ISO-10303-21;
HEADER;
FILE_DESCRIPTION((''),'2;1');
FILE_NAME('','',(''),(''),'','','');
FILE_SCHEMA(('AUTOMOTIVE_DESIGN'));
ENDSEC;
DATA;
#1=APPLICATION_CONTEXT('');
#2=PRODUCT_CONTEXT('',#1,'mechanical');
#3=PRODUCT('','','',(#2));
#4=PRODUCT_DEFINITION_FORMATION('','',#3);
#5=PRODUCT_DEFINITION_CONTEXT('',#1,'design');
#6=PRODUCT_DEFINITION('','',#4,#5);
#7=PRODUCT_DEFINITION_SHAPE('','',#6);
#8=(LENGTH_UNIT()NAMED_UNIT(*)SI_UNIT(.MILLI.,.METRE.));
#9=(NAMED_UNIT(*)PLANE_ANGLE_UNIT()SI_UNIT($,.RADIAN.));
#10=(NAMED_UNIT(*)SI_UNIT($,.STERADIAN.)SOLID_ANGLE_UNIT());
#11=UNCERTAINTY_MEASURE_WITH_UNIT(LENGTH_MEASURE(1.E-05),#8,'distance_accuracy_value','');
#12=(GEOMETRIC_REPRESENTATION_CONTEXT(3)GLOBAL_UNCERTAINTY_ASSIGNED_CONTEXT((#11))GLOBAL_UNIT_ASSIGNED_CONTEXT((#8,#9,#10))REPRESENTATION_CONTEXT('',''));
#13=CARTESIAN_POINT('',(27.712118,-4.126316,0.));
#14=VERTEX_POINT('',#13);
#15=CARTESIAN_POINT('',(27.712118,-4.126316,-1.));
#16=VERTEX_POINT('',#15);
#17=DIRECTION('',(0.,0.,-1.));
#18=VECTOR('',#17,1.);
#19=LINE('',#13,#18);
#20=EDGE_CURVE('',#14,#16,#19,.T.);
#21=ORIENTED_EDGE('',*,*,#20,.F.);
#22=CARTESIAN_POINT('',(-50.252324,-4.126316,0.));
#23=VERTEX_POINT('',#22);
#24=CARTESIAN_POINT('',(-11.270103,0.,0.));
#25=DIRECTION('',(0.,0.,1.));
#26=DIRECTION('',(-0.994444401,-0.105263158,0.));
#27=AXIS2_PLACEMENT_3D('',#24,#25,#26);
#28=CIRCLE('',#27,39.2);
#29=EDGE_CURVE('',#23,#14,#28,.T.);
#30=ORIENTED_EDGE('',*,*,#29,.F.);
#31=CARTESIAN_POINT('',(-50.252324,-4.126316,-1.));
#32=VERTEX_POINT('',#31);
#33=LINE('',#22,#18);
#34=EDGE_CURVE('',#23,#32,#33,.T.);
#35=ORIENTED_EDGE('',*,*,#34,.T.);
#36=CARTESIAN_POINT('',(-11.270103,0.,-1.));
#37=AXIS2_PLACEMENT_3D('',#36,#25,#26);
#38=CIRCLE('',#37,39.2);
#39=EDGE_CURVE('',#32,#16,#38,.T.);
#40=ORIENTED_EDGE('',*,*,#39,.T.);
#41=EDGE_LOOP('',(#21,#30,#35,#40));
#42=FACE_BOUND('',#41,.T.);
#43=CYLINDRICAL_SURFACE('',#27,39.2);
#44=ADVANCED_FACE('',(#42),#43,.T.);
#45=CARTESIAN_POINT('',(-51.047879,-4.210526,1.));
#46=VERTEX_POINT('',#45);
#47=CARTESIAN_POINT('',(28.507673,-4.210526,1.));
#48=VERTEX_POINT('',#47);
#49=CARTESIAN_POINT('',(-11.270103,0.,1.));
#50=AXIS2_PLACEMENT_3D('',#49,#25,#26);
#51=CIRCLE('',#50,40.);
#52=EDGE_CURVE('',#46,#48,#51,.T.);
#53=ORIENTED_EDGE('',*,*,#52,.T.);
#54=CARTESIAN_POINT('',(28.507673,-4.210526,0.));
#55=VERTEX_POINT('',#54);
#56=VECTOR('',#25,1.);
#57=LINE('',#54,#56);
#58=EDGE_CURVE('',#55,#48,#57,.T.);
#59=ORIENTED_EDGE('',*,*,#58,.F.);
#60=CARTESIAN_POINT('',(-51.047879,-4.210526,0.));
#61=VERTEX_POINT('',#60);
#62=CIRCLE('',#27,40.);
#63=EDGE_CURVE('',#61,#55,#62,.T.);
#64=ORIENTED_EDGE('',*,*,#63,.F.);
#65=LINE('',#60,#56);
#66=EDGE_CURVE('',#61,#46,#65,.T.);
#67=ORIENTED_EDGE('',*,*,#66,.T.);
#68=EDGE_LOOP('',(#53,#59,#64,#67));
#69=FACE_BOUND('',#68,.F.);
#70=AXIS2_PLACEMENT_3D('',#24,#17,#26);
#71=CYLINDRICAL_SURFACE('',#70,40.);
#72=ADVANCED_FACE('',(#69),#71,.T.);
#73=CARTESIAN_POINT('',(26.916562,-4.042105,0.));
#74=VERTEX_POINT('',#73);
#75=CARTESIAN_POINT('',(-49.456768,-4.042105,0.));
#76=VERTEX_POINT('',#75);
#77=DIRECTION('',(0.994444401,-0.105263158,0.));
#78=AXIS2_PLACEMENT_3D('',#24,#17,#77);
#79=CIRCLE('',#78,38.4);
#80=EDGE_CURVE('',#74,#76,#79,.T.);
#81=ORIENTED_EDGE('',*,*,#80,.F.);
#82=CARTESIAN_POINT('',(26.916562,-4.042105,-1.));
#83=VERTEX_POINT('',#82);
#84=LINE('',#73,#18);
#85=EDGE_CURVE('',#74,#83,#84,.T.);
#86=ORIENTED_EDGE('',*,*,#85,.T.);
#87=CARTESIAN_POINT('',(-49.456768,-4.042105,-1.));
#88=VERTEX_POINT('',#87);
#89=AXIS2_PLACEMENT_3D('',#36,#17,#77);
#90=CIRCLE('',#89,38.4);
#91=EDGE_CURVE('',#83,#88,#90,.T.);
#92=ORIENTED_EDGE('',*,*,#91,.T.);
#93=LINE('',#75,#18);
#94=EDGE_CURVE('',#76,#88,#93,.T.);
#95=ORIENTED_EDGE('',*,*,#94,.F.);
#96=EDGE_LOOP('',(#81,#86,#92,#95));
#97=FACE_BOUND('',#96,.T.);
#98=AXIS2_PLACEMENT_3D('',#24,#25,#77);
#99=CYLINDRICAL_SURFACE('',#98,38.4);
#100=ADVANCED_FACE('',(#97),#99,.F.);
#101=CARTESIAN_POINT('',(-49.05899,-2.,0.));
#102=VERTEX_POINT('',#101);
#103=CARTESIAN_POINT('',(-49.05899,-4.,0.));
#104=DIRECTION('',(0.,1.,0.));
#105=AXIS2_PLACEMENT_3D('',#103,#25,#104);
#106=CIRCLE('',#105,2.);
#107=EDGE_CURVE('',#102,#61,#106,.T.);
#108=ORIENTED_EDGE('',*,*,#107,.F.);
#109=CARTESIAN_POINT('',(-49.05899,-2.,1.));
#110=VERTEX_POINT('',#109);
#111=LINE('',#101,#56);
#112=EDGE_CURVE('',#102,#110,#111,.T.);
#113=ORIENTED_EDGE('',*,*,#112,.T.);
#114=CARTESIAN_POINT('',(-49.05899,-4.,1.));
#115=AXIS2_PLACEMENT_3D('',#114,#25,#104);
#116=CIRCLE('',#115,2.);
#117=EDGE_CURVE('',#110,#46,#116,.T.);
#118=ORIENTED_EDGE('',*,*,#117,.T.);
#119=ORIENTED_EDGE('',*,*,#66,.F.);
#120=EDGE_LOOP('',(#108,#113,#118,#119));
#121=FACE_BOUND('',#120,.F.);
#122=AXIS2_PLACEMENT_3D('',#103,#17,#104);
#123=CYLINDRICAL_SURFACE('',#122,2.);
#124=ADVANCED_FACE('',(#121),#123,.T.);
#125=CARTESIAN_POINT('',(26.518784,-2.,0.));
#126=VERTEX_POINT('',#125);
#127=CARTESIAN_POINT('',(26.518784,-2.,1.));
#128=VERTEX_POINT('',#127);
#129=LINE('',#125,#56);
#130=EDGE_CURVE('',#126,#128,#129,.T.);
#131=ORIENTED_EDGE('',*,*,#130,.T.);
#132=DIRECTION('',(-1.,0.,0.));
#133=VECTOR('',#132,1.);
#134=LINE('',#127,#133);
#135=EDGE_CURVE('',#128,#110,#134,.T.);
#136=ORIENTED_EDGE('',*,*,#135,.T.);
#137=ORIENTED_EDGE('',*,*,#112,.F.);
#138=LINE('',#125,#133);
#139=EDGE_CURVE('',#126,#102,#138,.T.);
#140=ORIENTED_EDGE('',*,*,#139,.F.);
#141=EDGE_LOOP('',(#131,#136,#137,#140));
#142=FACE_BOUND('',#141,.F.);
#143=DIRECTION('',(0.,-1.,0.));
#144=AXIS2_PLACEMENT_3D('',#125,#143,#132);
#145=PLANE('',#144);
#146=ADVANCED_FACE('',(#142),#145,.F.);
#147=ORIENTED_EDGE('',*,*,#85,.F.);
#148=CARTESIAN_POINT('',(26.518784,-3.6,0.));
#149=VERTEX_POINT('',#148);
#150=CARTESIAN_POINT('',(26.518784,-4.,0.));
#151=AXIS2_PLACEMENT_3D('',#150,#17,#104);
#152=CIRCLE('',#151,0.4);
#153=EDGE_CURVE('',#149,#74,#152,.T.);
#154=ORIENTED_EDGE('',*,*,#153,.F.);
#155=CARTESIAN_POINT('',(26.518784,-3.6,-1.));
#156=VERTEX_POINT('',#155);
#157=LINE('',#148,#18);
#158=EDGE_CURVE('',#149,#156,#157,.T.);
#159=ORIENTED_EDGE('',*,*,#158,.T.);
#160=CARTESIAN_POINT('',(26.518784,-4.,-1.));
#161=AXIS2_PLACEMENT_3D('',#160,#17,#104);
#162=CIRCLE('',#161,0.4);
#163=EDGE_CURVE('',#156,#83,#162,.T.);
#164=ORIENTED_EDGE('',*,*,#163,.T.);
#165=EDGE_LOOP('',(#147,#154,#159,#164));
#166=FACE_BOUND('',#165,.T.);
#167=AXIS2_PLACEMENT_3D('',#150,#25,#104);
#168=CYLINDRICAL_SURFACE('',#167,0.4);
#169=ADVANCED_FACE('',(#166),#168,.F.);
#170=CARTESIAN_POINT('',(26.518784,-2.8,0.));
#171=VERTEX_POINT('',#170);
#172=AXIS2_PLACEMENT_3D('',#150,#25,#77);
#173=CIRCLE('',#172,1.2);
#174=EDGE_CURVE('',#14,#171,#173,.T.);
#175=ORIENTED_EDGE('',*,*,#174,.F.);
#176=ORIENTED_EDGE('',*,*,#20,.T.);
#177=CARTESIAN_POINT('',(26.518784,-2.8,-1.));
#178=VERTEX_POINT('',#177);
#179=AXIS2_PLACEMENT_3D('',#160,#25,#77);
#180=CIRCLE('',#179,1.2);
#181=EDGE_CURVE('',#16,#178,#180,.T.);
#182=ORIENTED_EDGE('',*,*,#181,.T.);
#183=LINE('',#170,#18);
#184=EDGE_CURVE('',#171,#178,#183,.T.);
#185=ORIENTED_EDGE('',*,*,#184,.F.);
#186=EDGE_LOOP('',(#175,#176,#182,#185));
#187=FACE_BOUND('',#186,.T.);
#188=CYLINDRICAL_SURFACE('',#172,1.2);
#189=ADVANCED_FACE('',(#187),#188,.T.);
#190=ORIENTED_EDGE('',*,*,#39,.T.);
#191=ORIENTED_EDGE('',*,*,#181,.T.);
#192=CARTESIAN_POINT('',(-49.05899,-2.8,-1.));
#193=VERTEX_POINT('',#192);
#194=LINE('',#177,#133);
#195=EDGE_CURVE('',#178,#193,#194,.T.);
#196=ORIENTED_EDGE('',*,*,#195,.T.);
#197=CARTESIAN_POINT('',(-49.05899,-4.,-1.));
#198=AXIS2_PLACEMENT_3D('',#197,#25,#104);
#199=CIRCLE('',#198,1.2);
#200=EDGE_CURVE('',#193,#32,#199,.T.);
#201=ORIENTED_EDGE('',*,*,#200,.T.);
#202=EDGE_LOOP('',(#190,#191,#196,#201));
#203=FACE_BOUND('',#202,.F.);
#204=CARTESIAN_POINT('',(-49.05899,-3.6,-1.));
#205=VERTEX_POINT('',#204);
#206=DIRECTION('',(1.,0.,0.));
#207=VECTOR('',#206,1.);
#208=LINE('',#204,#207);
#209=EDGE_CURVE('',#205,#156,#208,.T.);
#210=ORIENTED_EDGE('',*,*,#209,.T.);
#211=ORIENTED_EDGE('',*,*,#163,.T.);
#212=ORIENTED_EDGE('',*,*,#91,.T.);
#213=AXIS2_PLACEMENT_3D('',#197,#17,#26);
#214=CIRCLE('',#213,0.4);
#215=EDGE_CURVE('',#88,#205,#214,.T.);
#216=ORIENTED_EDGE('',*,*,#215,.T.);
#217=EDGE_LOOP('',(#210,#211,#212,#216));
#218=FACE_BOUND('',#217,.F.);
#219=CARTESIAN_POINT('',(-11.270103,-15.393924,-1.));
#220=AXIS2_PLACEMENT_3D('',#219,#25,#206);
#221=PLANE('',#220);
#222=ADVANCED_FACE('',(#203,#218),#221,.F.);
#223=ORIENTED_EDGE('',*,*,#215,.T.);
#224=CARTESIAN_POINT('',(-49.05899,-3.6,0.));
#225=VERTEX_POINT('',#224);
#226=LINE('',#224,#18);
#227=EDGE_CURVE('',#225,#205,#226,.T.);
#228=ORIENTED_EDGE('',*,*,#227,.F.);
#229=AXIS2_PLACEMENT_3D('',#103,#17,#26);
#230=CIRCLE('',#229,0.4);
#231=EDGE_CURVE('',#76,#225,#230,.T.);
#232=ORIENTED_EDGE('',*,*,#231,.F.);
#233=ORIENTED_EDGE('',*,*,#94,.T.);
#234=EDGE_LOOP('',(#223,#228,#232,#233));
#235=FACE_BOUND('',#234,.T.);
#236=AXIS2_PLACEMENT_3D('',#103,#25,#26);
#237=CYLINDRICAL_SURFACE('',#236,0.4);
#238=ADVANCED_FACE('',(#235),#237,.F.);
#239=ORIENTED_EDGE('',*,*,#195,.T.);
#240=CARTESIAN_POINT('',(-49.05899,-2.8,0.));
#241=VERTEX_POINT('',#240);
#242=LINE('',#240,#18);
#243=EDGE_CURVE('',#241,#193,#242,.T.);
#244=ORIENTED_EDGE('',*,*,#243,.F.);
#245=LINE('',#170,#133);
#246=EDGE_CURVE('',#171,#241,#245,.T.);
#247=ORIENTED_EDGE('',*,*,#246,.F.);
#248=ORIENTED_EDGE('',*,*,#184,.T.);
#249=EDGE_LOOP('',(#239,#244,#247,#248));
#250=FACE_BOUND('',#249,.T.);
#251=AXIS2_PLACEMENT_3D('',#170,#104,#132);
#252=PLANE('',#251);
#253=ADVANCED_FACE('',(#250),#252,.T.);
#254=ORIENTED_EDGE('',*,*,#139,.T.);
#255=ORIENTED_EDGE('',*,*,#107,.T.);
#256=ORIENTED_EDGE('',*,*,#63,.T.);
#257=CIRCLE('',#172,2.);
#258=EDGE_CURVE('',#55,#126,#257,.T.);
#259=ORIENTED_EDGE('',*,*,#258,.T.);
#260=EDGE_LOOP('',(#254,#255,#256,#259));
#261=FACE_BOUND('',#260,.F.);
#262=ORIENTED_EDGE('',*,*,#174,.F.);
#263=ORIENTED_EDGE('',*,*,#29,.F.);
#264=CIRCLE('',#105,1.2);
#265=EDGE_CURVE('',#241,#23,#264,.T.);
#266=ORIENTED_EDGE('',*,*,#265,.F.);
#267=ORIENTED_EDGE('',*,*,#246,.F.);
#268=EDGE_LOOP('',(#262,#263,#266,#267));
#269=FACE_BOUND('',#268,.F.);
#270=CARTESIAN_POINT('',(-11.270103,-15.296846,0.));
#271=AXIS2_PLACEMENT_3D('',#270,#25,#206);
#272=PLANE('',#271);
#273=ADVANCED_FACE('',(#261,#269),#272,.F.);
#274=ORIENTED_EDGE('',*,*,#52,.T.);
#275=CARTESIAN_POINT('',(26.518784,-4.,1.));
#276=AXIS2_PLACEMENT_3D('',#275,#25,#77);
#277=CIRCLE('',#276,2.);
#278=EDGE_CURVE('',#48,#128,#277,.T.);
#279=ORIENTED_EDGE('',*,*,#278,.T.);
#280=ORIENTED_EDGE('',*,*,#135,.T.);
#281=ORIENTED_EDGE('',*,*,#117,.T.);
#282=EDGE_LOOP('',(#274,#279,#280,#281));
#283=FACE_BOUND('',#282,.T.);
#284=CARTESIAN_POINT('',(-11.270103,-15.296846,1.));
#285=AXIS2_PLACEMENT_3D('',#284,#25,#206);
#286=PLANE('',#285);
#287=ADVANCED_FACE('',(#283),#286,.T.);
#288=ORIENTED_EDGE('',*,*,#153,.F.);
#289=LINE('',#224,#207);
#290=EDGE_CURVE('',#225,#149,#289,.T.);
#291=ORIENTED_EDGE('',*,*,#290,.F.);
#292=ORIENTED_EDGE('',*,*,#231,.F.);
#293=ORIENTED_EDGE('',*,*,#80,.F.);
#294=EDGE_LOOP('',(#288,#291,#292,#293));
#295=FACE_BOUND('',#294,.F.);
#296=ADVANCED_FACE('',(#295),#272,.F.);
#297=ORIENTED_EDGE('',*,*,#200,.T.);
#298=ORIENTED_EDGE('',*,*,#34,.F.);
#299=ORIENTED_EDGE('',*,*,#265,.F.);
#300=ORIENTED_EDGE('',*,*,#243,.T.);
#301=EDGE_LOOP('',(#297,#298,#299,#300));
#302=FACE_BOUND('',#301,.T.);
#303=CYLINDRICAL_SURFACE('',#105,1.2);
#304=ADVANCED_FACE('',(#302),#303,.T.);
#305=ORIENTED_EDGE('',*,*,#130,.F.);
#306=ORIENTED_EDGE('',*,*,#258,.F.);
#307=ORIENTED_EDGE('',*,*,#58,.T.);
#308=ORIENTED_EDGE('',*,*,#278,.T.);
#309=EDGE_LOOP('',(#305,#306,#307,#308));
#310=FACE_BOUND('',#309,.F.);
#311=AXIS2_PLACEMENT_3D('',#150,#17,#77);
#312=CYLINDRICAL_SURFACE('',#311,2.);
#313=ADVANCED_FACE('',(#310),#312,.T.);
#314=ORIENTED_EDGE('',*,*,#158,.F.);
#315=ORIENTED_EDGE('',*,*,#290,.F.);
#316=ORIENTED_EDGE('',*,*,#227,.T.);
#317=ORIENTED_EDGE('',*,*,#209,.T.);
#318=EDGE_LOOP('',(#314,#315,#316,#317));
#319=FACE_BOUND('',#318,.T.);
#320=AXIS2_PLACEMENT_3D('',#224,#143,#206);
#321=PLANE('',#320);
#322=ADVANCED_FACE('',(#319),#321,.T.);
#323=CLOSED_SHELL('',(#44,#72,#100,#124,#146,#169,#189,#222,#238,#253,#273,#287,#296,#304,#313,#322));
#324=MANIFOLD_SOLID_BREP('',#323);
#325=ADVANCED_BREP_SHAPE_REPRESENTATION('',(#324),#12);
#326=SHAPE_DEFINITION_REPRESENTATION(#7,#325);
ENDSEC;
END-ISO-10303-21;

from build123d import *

# Parameters (mm, degrees)
F1_DEPTH = 1
F2_DEPTH = 1


with BuildPart() as f1:
    # F0 (on Top) → F1 (new body)
    with BuildSketch(Plane.XY):
        with BuildLine():
            ThreePointArc((28.507673021, -4.2105263158), (28.0055681014, -2.6622878919), (26.5187842181, -2))
            Line((26.5187842181, -2), (-49.0589902927, -2))
            ThreePointArc((-49.0589902927, -2), (-50.5457741761, -2.6622878919), (-51.0478790956, -4.2105263158))
            ThreePointArc((-51.0478790956, -4.2105263158), (-11.2701030373, -40), (28.507673021, -4.2105263158))
        make_face()
        with BuildLine():
            ThreePointArc((26.5187842181, -2.7999999982), (27.4108545494, -3.1973727339), (27.7121175016, -4.1263157897))
            ThreePointArc((27.7121175016, -4.1263157897), (-11.2701030383, -39.2000000018), (-50.2523235764, -4.1263157876))
            ThreePointArc((-50.2523235764, -4.1263157876), (-49.9510606247, -3.1973727333), (-49.0589902947, -2.7999999982))
            Line((-49.0589902947, -2.7999999982), (26.5187842181, -2.7999999982))
        make_face(mode=Mode.SUBTRACT)
        with BuildLine():
            ThreePointArc((-50.2523235764, -4.1263157876), (-11.2701030383, -39.2000000018), (27.7121175016, -4.1263157897))
            ThreePointArc((27.7121175016, -4.1263157897), (27.4108545494, -3.1973727339), (26.5187842181, -2.7999999982))
            Line((26.5187842181, -2.7999999982), (-49.0589902947, -2.7999999982))
            ThreePointArc((-49.0589902947, -2.7999999982), (-49.9510606247, -3.1973727333), (-50.2523235764, -4.1263157876))
        make_face()
        with BuildLine():
            Line((-49.0589902947, -3.5999999382), (26.5187842181, -3.5999999382))
            ThreePointArc((26.5187842181, -3.5999999382), (26.8161410407, -3.732457537), (26.9165620401, -4.0421052697))
            ThreePointArc((26.9165620401, -4.0421052697), (-11.2701030383, -38.4000000618), (-49.456768115, -4.0421052677))
            ThreePointArc((-49.456768115, -4.0421052677), (-49.356347116, -3.7324575364), (-49.0589902947, -3.5999999382))
        make_face(mode=Mode.SUBTRACT)
        with BuildLine():
            ThreePointArc((26.9165620401, -4.0421052697), (26.8161410407, -3.732457537), (26.5187842181, -3.5999999382))
            Line((26.5187842181, -3.5999999382), (-49.0589902947, -3.5999999382))
            ThreePointArc((-49.0589902947, -3.5999999382), (-49.356347116, -3.7324575364), (-49.456768115, -4.0421052677))
            ThreePointArc((-49.456768115, -4.0421052677), (-11.2701030383, -38.4000000618), (26.9165620401, -4.0421052697))
        make_face()
    extrude(amount=F1_DEPTH)

    # F0 (on Top) → F2 (join)
    with BuildSketch(Plane.XY):
        with BuildLine():
            ThreePointArc((-50.2523235764, -4.1263157876), (-11.2701030383, -39.2000000018), (27.7121175016, -4.1263157897))
            ThreePointArc((27.7121175016, -4.1263157897), (27.4108545494, -3.1973727339), (26.5187842181, -2.7999999982))
            Line((26.5187842181, -2.7999999982), (-49.0589902947, -2.7999999982))
            ThreePointArc((-49.0589902947, -2.7999999982), (-49.9510606247, -3.1973727333), (-50.2523235764, -4.1263157876))
        make_face()
        with BuildLine():
            Line((-49.0589902947, -3.5999999382), (26.5187842181, -3.5999999382))
            ThreePointArc((26.5187842181, -3.5999999382), (26.8161410407, -3.732457537), (26.9165620401, -4.0421052697))
            ThreePointArc((26.9165620401, -4.0421052697), (-11.2701030383, -38.4000000618), (-49.456768115, -4.0421052677))
            ThreePointArc((-49.456768115, -4.0421052677), (-49.356347116, -3.7324575364), (-49.0589902947, -3.5999999382))
        make_face(mode=Mode.SUBTRACT)
    extrude(amount=-F2_DEPTH)


solid = f1.part
